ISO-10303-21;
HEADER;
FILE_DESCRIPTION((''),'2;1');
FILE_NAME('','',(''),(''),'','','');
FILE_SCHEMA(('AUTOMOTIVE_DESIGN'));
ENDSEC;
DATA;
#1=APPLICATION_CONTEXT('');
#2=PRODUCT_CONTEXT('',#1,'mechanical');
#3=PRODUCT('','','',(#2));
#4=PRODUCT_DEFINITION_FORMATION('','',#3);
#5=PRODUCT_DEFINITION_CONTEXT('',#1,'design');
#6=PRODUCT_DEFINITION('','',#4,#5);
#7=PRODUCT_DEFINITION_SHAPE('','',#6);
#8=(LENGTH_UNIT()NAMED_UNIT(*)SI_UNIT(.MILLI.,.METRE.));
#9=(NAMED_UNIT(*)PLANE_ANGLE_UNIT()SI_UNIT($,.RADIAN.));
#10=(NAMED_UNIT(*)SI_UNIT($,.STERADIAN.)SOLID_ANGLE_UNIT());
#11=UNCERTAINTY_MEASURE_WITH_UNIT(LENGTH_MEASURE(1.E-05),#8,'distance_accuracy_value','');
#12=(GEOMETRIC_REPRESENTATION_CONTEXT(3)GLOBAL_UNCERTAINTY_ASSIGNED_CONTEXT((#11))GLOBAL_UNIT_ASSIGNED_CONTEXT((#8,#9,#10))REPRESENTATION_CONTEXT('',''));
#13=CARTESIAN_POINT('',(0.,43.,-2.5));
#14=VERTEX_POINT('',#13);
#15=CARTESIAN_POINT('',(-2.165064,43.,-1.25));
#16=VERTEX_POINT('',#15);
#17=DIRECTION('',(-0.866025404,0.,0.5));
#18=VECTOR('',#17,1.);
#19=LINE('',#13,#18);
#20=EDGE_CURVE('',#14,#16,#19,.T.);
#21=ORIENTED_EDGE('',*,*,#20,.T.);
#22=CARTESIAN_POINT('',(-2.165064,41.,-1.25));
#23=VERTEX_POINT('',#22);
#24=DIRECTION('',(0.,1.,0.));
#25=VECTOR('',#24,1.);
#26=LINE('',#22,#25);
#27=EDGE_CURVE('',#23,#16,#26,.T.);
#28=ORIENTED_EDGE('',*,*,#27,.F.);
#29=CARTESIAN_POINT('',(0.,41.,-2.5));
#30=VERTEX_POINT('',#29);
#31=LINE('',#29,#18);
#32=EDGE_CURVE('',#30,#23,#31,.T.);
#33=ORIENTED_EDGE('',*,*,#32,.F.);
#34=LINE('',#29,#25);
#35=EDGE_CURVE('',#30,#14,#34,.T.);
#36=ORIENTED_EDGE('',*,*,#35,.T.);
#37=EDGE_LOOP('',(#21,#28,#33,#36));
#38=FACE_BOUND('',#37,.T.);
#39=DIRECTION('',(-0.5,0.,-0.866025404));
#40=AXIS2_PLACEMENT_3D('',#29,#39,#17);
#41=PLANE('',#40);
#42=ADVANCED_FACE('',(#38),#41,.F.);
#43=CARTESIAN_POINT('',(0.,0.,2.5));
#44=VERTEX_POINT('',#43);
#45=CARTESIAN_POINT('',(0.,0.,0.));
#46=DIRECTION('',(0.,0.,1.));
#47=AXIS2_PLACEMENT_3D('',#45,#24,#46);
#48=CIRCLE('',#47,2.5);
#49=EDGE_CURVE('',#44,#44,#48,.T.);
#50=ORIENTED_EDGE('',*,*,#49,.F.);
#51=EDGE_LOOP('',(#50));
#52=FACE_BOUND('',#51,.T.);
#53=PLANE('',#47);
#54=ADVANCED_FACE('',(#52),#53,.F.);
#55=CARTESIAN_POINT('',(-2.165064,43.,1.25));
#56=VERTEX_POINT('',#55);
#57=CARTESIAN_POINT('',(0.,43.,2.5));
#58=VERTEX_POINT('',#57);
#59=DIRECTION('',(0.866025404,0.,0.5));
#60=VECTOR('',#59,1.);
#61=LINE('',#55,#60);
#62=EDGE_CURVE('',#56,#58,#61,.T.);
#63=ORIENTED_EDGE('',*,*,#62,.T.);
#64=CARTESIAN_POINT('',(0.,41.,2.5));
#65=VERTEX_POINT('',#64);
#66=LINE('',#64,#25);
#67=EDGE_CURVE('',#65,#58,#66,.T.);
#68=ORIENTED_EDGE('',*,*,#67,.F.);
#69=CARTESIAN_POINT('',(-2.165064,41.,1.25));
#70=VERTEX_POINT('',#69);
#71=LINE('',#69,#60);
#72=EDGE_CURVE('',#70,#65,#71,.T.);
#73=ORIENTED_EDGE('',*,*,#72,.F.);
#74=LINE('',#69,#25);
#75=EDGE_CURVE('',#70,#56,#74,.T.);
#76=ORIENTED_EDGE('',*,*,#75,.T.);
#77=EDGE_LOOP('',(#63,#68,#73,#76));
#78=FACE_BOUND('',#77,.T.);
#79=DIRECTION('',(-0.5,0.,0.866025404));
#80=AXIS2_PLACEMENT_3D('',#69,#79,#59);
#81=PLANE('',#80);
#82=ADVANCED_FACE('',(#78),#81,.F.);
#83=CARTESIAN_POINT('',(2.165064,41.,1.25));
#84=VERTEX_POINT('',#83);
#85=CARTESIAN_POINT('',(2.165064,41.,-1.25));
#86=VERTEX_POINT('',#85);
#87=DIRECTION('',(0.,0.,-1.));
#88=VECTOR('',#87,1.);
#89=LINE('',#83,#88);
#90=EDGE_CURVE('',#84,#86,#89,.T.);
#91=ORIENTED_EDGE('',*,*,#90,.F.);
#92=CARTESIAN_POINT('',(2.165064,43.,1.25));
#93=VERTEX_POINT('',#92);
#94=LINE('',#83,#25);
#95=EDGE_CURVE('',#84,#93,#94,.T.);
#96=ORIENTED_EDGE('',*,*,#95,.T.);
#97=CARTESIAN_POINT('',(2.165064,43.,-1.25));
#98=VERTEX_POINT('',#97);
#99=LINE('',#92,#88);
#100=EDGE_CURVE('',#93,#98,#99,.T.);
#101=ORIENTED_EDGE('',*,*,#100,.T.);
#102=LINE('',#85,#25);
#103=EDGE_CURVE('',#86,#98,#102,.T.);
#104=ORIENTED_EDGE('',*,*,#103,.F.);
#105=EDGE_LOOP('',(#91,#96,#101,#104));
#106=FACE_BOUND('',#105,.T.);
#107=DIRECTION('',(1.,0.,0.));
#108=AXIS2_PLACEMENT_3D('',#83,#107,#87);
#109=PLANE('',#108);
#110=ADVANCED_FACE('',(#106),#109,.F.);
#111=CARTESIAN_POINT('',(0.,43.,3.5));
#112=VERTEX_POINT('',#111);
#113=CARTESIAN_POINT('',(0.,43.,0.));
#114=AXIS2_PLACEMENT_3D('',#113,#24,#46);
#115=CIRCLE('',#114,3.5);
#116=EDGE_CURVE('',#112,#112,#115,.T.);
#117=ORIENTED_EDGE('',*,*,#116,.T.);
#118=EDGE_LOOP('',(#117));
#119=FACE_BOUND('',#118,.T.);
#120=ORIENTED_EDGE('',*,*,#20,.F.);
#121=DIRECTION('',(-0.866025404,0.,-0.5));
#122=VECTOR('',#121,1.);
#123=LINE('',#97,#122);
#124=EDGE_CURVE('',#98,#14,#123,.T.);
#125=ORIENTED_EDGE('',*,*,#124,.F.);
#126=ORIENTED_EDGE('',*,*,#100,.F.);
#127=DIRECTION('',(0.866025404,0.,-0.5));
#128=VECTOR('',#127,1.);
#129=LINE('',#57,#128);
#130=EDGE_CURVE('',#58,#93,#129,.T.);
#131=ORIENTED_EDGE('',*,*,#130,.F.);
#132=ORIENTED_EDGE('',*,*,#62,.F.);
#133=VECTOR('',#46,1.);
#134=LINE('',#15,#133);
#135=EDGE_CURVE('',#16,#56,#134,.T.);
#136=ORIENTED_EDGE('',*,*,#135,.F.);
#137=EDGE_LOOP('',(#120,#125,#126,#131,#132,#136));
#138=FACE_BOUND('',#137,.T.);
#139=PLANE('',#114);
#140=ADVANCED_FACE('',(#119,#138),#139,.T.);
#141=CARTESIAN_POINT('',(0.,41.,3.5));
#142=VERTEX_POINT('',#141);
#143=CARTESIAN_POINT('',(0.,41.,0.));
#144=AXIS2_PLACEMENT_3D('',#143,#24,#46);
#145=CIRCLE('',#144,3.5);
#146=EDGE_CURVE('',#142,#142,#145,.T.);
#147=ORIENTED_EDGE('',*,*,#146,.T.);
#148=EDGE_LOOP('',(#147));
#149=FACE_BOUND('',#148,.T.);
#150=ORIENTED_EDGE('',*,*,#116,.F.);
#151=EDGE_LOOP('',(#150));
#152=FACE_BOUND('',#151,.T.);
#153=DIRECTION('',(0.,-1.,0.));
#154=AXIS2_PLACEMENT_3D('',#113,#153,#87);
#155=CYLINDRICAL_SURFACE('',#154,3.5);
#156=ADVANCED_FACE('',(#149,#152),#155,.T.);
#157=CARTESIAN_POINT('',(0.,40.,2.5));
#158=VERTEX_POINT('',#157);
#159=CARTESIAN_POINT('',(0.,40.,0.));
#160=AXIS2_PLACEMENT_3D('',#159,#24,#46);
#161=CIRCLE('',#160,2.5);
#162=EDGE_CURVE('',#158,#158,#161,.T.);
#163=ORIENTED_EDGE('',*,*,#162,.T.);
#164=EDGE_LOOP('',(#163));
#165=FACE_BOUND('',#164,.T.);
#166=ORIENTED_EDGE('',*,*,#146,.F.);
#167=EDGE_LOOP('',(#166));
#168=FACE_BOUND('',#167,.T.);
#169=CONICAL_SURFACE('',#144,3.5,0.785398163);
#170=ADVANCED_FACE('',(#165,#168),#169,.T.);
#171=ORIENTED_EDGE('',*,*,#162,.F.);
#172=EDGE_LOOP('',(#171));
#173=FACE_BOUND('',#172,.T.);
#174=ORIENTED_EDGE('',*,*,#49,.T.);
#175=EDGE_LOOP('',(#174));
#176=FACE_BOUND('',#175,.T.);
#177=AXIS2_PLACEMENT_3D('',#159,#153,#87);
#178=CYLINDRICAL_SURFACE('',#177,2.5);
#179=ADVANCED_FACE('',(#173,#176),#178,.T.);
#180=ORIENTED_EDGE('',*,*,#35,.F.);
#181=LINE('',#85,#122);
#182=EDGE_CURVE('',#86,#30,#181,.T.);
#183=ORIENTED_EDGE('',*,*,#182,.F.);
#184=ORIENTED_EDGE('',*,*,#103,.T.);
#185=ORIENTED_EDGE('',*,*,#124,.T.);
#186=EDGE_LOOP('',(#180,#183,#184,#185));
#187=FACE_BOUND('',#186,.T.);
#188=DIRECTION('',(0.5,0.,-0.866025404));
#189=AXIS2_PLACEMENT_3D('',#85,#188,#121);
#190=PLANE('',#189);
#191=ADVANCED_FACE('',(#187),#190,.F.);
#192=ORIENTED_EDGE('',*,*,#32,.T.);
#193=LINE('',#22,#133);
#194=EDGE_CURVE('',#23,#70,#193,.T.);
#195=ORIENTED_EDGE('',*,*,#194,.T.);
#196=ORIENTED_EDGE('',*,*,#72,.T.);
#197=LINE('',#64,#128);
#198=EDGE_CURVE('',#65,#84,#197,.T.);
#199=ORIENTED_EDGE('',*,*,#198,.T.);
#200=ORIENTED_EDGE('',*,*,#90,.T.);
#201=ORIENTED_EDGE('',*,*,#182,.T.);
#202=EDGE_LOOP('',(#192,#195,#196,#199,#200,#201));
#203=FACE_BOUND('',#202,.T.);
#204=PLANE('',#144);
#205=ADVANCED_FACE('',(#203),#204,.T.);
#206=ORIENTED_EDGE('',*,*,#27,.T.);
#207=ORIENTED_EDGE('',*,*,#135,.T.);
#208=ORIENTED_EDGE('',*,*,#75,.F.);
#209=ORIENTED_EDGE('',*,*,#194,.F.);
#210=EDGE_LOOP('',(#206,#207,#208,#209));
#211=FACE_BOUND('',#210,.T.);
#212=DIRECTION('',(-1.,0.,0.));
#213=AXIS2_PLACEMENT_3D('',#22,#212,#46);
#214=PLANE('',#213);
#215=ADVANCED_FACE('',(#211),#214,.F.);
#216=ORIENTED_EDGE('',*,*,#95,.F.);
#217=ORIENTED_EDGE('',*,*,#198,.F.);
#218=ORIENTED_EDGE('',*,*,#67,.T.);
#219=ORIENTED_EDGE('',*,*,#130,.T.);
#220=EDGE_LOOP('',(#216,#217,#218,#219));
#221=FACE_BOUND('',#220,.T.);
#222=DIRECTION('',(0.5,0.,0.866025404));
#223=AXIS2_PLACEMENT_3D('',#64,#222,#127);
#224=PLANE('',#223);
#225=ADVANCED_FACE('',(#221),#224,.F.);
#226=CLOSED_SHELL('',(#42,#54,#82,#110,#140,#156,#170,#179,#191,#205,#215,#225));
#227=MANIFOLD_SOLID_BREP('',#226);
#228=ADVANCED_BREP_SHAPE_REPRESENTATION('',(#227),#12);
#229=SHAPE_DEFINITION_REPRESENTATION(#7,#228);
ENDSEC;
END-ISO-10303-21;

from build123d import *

# Parameters (mm, degrees)
SKETCH1_R          = 2.5
SCREW_LENGTH_DEPTH = 40
SKETCH2_R          = 3.5
SCREW_CAP_DEPTH    = 3
SCREW_HOLE_DEPTH   = 2
CHAMFER1_SIZE      = 1


with BuildPart() as part:
    # Sketch1 → Screw Length (new body)
    with BuildSketch(Plane(origin=(0, 0, 0), x_dir=(1, 0, 0), z_dir=(0, 1, 0))):
        with Locations(Location((0, 0, 0), (0, 0, 270))):
            Circle(SKETCH1_R)
    extrude(amount=SCREW_LENGTH_DEPTH)

    # Sketch2 → Screw Cap (add)
    with BuildSketch(Plane(origin=(0, 40, 0), x_dir=(1, 0, 0), z_dir=(0, 1, 0))):
        with Locations(Location((0, 0, 0), (0, 0, 270))):
            Circle(SKETCH2_R)
    extrude(amount=SCREW_CAP_DEPTH)

    # Sketch3 → Screw Hole (cut)
    with BuildSketch(Plane(origin=(0, 43, 0), x_dir=(1, 0, 0), z_dir=(0, 1, 0))):
        Polygon((0, 2.5), (-2.165063509, 1.25), (-2.165063509, -1.25), (0, -2.5), (2.165063509, -1.25), (2.165063509, 1.25), align=None)
    extrude(amount=-SCREW_HOLE_DEPTH, mode=Mode.SUBTRACT)

    # Chamfer1
    chamfer1_edges = [part.edges().sort_by_distance(p)[0] for p in [
        (0, 40, -3.5),
    ]]
    chamfer(chamfer1_edges, length=CHAMFER1_SIZE - 0.0001)  # a hair under: the kernel refuses the full size


solid = part.part
